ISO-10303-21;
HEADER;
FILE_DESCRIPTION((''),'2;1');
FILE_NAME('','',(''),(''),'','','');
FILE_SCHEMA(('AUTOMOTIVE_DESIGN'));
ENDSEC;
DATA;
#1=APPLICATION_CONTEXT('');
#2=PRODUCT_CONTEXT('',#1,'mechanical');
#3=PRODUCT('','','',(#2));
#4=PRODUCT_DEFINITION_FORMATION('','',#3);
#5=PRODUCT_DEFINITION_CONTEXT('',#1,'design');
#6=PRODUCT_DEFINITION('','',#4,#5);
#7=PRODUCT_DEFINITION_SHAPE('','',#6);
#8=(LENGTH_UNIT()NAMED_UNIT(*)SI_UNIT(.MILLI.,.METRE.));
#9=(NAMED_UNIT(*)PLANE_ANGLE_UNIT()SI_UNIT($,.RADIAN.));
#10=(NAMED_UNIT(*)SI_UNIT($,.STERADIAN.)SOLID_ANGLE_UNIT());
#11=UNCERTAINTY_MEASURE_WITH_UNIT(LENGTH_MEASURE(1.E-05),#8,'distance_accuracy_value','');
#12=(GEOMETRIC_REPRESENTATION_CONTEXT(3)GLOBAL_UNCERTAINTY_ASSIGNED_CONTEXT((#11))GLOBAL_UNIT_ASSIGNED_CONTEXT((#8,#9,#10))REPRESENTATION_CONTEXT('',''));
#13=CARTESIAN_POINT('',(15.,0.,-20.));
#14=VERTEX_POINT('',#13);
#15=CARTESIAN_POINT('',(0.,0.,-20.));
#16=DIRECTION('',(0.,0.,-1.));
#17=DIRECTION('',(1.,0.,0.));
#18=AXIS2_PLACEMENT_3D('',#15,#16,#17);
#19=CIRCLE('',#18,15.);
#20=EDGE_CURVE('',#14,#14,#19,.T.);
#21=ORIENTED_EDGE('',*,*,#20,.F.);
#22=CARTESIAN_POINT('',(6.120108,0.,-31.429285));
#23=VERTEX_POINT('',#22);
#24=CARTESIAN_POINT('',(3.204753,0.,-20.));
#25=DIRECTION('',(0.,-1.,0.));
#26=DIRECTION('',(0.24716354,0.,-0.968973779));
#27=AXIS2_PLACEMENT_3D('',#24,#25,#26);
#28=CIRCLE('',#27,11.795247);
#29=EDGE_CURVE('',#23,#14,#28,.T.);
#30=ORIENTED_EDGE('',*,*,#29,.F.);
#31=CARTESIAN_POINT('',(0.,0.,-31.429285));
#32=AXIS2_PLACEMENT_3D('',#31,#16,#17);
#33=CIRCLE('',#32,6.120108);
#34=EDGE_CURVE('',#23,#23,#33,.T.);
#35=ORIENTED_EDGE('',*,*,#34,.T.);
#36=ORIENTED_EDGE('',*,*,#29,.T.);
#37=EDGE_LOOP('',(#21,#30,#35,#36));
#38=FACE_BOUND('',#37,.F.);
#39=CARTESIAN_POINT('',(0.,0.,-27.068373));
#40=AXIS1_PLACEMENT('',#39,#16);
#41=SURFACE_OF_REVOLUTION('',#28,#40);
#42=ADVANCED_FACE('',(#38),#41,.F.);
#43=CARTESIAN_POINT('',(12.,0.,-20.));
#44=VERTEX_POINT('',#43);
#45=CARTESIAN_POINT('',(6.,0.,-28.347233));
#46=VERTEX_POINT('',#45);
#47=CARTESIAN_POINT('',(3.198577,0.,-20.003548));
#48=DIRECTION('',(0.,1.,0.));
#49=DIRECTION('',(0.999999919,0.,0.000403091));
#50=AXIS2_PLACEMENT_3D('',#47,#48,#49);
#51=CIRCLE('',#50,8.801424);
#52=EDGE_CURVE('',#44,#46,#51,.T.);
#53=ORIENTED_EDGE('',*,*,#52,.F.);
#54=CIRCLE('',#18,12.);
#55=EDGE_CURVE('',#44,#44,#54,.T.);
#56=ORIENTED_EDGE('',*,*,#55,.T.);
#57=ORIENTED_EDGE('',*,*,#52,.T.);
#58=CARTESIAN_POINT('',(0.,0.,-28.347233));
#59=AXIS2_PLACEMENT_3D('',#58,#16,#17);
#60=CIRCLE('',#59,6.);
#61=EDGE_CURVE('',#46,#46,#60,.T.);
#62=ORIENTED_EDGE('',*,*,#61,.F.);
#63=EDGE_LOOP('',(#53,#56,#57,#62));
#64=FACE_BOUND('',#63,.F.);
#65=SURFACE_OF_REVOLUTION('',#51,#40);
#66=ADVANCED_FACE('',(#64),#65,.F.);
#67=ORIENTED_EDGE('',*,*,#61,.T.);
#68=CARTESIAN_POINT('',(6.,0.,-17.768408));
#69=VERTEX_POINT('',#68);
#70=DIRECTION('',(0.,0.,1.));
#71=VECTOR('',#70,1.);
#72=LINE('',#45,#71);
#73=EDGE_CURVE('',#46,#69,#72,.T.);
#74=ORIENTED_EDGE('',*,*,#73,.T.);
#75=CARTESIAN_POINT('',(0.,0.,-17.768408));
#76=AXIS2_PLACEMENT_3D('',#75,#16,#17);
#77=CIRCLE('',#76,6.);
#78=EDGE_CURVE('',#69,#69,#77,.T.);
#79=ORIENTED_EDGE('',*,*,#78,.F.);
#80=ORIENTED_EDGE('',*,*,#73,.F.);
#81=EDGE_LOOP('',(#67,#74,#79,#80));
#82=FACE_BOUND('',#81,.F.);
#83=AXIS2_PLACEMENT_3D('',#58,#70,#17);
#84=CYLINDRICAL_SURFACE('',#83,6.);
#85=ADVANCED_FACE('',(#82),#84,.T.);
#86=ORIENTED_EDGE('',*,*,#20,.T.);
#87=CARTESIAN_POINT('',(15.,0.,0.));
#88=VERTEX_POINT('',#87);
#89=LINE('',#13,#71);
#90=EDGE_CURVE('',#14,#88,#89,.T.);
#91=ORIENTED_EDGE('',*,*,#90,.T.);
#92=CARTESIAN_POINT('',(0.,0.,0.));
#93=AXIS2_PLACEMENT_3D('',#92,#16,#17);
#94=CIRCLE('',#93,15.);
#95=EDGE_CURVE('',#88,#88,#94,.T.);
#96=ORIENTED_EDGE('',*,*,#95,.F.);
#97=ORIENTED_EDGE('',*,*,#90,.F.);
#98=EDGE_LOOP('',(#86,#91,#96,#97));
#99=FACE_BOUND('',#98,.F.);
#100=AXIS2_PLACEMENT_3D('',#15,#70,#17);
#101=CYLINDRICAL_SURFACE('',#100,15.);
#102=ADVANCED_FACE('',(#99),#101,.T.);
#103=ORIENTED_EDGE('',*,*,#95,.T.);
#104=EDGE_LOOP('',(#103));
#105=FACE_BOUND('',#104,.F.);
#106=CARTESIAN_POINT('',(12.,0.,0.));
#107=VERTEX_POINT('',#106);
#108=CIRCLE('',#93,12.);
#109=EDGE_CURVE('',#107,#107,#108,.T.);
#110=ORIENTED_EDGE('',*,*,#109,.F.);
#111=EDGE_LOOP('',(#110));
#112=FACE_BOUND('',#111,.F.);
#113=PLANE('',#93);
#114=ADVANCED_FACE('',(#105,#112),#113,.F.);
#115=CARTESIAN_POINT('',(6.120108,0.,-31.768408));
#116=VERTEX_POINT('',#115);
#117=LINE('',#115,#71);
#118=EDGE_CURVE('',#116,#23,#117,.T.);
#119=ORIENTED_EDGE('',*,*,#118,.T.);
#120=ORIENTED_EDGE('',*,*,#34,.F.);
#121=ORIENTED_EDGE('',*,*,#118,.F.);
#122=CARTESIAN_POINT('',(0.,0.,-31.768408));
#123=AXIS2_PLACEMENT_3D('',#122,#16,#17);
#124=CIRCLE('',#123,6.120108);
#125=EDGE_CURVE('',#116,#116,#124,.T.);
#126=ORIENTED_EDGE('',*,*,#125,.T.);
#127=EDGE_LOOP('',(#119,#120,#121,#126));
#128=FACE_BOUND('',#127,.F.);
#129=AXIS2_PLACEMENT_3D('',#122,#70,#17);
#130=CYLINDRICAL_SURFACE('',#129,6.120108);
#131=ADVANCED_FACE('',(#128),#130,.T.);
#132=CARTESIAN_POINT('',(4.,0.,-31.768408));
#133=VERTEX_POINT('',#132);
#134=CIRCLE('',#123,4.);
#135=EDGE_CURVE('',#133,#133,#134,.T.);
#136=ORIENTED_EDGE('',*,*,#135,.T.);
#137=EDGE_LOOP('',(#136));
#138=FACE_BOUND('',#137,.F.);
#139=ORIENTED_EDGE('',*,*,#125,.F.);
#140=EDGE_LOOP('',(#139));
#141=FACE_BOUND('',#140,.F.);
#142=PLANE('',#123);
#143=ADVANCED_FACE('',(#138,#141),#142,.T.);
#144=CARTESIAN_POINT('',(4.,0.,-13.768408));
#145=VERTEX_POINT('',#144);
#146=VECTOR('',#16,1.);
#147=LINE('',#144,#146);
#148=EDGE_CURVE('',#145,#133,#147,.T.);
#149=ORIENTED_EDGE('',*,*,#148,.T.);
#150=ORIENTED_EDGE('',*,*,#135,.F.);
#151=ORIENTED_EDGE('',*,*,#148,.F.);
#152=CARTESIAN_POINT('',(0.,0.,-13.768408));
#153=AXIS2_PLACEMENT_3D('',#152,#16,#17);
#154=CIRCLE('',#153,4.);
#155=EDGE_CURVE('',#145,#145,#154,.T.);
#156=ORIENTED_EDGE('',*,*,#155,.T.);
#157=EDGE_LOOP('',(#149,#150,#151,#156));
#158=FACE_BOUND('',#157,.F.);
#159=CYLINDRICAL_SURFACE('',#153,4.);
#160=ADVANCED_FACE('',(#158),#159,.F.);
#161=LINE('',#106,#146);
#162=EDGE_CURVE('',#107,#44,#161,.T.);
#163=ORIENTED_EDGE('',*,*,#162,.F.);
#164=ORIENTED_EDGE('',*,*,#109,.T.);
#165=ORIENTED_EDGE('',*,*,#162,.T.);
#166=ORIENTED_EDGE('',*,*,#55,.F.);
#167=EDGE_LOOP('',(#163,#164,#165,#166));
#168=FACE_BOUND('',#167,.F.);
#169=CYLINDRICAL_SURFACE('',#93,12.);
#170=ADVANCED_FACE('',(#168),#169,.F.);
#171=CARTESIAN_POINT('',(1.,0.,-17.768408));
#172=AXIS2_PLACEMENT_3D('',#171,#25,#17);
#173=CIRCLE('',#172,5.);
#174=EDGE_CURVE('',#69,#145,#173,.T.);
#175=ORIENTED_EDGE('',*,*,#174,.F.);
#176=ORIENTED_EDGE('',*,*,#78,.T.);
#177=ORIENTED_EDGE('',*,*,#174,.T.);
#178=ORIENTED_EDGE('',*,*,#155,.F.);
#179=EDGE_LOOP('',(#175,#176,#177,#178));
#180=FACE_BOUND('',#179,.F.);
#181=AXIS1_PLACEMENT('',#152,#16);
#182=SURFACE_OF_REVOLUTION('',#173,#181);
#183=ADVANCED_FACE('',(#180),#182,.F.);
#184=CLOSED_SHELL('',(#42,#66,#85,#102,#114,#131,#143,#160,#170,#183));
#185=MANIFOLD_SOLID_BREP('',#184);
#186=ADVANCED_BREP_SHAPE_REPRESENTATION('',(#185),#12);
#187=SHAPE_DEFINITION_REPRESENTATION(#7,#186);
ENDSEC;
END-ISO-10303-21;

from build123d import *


# Not quite as in the source:
# - a fillet or chamfer that OpenCascade refuses, or shapes differently, is made with other operations: its cross-section is extruded or revolved along the edge and cut away or added


with BuildPart() as f1:
    # F0 (on Front) → F1 (revolve)
    with BuildSketch(Plane.XZ):
        with BuildLine():
            Line((15, 0), (13.5, 0))
            Line((13.5, 0), (12, 0))
            Line((12, 0), (12, -1.5))
            Line((12, -1.5), (12, -20))
            ThreePointArc((12, -20), (10.3452954698, -25.1406164595), (6, -28.3472333599))
            ThreePointArc((6, -28.3472333599), (5.0122671395, -28.6160728483), (4, -28.7684083747))
            Line((4, -28.7684083747), (4, -31.7684083747))
            Line((4, -31.7684083747), (6.1201079457, -31.7684083747))
            Line((6.1201079457, -31.7684083747), (6.1201079457, -31.4292851344))
            ThreePointArc((6.1201079457, -31.4292851344), (12.5191285439, -27.2367299518), (15, -20))
            Line((15, -20), (15, 0))
        make_face()
        with BuildLine():
            ThreePointArc((4, -28.7684083747), (5.0122671395, -28.6160728483), (6, -28.3472333599))
            Line((6, -28.3472333599), (6, -13.7684083747))
            Line((6, -13.7684083747), (4, -13.7684083747))
            Line((4, -13.7684083747), (4, -28.7684083747))
        make_face()
    revolve(axis=Axis((0, 0, -27.0683728158), (0, 0, -1)))

    # F2: fillet of radius 5 on 1 edges, made by hand

    # F2_s1 → F2_t2 (revolve, cut)
    with BuildSketch(Plane.XZ):
        with BuildLine():
            ThreePointArc((6, -17.7684083747), (5.472135955, -15.5323403972), (4, -13.7684083747))
            Line((4, -13.7684083747), (6, -13.7684083747))
            Line((6, -13.7684083747), (6, -17.7684083747))
        make_face()
    revolve(axis=Axis((0, 0, -13.7684083747), (0, 0, -1)), mode=Mode.SUBTRACT)


solid = f1.part
